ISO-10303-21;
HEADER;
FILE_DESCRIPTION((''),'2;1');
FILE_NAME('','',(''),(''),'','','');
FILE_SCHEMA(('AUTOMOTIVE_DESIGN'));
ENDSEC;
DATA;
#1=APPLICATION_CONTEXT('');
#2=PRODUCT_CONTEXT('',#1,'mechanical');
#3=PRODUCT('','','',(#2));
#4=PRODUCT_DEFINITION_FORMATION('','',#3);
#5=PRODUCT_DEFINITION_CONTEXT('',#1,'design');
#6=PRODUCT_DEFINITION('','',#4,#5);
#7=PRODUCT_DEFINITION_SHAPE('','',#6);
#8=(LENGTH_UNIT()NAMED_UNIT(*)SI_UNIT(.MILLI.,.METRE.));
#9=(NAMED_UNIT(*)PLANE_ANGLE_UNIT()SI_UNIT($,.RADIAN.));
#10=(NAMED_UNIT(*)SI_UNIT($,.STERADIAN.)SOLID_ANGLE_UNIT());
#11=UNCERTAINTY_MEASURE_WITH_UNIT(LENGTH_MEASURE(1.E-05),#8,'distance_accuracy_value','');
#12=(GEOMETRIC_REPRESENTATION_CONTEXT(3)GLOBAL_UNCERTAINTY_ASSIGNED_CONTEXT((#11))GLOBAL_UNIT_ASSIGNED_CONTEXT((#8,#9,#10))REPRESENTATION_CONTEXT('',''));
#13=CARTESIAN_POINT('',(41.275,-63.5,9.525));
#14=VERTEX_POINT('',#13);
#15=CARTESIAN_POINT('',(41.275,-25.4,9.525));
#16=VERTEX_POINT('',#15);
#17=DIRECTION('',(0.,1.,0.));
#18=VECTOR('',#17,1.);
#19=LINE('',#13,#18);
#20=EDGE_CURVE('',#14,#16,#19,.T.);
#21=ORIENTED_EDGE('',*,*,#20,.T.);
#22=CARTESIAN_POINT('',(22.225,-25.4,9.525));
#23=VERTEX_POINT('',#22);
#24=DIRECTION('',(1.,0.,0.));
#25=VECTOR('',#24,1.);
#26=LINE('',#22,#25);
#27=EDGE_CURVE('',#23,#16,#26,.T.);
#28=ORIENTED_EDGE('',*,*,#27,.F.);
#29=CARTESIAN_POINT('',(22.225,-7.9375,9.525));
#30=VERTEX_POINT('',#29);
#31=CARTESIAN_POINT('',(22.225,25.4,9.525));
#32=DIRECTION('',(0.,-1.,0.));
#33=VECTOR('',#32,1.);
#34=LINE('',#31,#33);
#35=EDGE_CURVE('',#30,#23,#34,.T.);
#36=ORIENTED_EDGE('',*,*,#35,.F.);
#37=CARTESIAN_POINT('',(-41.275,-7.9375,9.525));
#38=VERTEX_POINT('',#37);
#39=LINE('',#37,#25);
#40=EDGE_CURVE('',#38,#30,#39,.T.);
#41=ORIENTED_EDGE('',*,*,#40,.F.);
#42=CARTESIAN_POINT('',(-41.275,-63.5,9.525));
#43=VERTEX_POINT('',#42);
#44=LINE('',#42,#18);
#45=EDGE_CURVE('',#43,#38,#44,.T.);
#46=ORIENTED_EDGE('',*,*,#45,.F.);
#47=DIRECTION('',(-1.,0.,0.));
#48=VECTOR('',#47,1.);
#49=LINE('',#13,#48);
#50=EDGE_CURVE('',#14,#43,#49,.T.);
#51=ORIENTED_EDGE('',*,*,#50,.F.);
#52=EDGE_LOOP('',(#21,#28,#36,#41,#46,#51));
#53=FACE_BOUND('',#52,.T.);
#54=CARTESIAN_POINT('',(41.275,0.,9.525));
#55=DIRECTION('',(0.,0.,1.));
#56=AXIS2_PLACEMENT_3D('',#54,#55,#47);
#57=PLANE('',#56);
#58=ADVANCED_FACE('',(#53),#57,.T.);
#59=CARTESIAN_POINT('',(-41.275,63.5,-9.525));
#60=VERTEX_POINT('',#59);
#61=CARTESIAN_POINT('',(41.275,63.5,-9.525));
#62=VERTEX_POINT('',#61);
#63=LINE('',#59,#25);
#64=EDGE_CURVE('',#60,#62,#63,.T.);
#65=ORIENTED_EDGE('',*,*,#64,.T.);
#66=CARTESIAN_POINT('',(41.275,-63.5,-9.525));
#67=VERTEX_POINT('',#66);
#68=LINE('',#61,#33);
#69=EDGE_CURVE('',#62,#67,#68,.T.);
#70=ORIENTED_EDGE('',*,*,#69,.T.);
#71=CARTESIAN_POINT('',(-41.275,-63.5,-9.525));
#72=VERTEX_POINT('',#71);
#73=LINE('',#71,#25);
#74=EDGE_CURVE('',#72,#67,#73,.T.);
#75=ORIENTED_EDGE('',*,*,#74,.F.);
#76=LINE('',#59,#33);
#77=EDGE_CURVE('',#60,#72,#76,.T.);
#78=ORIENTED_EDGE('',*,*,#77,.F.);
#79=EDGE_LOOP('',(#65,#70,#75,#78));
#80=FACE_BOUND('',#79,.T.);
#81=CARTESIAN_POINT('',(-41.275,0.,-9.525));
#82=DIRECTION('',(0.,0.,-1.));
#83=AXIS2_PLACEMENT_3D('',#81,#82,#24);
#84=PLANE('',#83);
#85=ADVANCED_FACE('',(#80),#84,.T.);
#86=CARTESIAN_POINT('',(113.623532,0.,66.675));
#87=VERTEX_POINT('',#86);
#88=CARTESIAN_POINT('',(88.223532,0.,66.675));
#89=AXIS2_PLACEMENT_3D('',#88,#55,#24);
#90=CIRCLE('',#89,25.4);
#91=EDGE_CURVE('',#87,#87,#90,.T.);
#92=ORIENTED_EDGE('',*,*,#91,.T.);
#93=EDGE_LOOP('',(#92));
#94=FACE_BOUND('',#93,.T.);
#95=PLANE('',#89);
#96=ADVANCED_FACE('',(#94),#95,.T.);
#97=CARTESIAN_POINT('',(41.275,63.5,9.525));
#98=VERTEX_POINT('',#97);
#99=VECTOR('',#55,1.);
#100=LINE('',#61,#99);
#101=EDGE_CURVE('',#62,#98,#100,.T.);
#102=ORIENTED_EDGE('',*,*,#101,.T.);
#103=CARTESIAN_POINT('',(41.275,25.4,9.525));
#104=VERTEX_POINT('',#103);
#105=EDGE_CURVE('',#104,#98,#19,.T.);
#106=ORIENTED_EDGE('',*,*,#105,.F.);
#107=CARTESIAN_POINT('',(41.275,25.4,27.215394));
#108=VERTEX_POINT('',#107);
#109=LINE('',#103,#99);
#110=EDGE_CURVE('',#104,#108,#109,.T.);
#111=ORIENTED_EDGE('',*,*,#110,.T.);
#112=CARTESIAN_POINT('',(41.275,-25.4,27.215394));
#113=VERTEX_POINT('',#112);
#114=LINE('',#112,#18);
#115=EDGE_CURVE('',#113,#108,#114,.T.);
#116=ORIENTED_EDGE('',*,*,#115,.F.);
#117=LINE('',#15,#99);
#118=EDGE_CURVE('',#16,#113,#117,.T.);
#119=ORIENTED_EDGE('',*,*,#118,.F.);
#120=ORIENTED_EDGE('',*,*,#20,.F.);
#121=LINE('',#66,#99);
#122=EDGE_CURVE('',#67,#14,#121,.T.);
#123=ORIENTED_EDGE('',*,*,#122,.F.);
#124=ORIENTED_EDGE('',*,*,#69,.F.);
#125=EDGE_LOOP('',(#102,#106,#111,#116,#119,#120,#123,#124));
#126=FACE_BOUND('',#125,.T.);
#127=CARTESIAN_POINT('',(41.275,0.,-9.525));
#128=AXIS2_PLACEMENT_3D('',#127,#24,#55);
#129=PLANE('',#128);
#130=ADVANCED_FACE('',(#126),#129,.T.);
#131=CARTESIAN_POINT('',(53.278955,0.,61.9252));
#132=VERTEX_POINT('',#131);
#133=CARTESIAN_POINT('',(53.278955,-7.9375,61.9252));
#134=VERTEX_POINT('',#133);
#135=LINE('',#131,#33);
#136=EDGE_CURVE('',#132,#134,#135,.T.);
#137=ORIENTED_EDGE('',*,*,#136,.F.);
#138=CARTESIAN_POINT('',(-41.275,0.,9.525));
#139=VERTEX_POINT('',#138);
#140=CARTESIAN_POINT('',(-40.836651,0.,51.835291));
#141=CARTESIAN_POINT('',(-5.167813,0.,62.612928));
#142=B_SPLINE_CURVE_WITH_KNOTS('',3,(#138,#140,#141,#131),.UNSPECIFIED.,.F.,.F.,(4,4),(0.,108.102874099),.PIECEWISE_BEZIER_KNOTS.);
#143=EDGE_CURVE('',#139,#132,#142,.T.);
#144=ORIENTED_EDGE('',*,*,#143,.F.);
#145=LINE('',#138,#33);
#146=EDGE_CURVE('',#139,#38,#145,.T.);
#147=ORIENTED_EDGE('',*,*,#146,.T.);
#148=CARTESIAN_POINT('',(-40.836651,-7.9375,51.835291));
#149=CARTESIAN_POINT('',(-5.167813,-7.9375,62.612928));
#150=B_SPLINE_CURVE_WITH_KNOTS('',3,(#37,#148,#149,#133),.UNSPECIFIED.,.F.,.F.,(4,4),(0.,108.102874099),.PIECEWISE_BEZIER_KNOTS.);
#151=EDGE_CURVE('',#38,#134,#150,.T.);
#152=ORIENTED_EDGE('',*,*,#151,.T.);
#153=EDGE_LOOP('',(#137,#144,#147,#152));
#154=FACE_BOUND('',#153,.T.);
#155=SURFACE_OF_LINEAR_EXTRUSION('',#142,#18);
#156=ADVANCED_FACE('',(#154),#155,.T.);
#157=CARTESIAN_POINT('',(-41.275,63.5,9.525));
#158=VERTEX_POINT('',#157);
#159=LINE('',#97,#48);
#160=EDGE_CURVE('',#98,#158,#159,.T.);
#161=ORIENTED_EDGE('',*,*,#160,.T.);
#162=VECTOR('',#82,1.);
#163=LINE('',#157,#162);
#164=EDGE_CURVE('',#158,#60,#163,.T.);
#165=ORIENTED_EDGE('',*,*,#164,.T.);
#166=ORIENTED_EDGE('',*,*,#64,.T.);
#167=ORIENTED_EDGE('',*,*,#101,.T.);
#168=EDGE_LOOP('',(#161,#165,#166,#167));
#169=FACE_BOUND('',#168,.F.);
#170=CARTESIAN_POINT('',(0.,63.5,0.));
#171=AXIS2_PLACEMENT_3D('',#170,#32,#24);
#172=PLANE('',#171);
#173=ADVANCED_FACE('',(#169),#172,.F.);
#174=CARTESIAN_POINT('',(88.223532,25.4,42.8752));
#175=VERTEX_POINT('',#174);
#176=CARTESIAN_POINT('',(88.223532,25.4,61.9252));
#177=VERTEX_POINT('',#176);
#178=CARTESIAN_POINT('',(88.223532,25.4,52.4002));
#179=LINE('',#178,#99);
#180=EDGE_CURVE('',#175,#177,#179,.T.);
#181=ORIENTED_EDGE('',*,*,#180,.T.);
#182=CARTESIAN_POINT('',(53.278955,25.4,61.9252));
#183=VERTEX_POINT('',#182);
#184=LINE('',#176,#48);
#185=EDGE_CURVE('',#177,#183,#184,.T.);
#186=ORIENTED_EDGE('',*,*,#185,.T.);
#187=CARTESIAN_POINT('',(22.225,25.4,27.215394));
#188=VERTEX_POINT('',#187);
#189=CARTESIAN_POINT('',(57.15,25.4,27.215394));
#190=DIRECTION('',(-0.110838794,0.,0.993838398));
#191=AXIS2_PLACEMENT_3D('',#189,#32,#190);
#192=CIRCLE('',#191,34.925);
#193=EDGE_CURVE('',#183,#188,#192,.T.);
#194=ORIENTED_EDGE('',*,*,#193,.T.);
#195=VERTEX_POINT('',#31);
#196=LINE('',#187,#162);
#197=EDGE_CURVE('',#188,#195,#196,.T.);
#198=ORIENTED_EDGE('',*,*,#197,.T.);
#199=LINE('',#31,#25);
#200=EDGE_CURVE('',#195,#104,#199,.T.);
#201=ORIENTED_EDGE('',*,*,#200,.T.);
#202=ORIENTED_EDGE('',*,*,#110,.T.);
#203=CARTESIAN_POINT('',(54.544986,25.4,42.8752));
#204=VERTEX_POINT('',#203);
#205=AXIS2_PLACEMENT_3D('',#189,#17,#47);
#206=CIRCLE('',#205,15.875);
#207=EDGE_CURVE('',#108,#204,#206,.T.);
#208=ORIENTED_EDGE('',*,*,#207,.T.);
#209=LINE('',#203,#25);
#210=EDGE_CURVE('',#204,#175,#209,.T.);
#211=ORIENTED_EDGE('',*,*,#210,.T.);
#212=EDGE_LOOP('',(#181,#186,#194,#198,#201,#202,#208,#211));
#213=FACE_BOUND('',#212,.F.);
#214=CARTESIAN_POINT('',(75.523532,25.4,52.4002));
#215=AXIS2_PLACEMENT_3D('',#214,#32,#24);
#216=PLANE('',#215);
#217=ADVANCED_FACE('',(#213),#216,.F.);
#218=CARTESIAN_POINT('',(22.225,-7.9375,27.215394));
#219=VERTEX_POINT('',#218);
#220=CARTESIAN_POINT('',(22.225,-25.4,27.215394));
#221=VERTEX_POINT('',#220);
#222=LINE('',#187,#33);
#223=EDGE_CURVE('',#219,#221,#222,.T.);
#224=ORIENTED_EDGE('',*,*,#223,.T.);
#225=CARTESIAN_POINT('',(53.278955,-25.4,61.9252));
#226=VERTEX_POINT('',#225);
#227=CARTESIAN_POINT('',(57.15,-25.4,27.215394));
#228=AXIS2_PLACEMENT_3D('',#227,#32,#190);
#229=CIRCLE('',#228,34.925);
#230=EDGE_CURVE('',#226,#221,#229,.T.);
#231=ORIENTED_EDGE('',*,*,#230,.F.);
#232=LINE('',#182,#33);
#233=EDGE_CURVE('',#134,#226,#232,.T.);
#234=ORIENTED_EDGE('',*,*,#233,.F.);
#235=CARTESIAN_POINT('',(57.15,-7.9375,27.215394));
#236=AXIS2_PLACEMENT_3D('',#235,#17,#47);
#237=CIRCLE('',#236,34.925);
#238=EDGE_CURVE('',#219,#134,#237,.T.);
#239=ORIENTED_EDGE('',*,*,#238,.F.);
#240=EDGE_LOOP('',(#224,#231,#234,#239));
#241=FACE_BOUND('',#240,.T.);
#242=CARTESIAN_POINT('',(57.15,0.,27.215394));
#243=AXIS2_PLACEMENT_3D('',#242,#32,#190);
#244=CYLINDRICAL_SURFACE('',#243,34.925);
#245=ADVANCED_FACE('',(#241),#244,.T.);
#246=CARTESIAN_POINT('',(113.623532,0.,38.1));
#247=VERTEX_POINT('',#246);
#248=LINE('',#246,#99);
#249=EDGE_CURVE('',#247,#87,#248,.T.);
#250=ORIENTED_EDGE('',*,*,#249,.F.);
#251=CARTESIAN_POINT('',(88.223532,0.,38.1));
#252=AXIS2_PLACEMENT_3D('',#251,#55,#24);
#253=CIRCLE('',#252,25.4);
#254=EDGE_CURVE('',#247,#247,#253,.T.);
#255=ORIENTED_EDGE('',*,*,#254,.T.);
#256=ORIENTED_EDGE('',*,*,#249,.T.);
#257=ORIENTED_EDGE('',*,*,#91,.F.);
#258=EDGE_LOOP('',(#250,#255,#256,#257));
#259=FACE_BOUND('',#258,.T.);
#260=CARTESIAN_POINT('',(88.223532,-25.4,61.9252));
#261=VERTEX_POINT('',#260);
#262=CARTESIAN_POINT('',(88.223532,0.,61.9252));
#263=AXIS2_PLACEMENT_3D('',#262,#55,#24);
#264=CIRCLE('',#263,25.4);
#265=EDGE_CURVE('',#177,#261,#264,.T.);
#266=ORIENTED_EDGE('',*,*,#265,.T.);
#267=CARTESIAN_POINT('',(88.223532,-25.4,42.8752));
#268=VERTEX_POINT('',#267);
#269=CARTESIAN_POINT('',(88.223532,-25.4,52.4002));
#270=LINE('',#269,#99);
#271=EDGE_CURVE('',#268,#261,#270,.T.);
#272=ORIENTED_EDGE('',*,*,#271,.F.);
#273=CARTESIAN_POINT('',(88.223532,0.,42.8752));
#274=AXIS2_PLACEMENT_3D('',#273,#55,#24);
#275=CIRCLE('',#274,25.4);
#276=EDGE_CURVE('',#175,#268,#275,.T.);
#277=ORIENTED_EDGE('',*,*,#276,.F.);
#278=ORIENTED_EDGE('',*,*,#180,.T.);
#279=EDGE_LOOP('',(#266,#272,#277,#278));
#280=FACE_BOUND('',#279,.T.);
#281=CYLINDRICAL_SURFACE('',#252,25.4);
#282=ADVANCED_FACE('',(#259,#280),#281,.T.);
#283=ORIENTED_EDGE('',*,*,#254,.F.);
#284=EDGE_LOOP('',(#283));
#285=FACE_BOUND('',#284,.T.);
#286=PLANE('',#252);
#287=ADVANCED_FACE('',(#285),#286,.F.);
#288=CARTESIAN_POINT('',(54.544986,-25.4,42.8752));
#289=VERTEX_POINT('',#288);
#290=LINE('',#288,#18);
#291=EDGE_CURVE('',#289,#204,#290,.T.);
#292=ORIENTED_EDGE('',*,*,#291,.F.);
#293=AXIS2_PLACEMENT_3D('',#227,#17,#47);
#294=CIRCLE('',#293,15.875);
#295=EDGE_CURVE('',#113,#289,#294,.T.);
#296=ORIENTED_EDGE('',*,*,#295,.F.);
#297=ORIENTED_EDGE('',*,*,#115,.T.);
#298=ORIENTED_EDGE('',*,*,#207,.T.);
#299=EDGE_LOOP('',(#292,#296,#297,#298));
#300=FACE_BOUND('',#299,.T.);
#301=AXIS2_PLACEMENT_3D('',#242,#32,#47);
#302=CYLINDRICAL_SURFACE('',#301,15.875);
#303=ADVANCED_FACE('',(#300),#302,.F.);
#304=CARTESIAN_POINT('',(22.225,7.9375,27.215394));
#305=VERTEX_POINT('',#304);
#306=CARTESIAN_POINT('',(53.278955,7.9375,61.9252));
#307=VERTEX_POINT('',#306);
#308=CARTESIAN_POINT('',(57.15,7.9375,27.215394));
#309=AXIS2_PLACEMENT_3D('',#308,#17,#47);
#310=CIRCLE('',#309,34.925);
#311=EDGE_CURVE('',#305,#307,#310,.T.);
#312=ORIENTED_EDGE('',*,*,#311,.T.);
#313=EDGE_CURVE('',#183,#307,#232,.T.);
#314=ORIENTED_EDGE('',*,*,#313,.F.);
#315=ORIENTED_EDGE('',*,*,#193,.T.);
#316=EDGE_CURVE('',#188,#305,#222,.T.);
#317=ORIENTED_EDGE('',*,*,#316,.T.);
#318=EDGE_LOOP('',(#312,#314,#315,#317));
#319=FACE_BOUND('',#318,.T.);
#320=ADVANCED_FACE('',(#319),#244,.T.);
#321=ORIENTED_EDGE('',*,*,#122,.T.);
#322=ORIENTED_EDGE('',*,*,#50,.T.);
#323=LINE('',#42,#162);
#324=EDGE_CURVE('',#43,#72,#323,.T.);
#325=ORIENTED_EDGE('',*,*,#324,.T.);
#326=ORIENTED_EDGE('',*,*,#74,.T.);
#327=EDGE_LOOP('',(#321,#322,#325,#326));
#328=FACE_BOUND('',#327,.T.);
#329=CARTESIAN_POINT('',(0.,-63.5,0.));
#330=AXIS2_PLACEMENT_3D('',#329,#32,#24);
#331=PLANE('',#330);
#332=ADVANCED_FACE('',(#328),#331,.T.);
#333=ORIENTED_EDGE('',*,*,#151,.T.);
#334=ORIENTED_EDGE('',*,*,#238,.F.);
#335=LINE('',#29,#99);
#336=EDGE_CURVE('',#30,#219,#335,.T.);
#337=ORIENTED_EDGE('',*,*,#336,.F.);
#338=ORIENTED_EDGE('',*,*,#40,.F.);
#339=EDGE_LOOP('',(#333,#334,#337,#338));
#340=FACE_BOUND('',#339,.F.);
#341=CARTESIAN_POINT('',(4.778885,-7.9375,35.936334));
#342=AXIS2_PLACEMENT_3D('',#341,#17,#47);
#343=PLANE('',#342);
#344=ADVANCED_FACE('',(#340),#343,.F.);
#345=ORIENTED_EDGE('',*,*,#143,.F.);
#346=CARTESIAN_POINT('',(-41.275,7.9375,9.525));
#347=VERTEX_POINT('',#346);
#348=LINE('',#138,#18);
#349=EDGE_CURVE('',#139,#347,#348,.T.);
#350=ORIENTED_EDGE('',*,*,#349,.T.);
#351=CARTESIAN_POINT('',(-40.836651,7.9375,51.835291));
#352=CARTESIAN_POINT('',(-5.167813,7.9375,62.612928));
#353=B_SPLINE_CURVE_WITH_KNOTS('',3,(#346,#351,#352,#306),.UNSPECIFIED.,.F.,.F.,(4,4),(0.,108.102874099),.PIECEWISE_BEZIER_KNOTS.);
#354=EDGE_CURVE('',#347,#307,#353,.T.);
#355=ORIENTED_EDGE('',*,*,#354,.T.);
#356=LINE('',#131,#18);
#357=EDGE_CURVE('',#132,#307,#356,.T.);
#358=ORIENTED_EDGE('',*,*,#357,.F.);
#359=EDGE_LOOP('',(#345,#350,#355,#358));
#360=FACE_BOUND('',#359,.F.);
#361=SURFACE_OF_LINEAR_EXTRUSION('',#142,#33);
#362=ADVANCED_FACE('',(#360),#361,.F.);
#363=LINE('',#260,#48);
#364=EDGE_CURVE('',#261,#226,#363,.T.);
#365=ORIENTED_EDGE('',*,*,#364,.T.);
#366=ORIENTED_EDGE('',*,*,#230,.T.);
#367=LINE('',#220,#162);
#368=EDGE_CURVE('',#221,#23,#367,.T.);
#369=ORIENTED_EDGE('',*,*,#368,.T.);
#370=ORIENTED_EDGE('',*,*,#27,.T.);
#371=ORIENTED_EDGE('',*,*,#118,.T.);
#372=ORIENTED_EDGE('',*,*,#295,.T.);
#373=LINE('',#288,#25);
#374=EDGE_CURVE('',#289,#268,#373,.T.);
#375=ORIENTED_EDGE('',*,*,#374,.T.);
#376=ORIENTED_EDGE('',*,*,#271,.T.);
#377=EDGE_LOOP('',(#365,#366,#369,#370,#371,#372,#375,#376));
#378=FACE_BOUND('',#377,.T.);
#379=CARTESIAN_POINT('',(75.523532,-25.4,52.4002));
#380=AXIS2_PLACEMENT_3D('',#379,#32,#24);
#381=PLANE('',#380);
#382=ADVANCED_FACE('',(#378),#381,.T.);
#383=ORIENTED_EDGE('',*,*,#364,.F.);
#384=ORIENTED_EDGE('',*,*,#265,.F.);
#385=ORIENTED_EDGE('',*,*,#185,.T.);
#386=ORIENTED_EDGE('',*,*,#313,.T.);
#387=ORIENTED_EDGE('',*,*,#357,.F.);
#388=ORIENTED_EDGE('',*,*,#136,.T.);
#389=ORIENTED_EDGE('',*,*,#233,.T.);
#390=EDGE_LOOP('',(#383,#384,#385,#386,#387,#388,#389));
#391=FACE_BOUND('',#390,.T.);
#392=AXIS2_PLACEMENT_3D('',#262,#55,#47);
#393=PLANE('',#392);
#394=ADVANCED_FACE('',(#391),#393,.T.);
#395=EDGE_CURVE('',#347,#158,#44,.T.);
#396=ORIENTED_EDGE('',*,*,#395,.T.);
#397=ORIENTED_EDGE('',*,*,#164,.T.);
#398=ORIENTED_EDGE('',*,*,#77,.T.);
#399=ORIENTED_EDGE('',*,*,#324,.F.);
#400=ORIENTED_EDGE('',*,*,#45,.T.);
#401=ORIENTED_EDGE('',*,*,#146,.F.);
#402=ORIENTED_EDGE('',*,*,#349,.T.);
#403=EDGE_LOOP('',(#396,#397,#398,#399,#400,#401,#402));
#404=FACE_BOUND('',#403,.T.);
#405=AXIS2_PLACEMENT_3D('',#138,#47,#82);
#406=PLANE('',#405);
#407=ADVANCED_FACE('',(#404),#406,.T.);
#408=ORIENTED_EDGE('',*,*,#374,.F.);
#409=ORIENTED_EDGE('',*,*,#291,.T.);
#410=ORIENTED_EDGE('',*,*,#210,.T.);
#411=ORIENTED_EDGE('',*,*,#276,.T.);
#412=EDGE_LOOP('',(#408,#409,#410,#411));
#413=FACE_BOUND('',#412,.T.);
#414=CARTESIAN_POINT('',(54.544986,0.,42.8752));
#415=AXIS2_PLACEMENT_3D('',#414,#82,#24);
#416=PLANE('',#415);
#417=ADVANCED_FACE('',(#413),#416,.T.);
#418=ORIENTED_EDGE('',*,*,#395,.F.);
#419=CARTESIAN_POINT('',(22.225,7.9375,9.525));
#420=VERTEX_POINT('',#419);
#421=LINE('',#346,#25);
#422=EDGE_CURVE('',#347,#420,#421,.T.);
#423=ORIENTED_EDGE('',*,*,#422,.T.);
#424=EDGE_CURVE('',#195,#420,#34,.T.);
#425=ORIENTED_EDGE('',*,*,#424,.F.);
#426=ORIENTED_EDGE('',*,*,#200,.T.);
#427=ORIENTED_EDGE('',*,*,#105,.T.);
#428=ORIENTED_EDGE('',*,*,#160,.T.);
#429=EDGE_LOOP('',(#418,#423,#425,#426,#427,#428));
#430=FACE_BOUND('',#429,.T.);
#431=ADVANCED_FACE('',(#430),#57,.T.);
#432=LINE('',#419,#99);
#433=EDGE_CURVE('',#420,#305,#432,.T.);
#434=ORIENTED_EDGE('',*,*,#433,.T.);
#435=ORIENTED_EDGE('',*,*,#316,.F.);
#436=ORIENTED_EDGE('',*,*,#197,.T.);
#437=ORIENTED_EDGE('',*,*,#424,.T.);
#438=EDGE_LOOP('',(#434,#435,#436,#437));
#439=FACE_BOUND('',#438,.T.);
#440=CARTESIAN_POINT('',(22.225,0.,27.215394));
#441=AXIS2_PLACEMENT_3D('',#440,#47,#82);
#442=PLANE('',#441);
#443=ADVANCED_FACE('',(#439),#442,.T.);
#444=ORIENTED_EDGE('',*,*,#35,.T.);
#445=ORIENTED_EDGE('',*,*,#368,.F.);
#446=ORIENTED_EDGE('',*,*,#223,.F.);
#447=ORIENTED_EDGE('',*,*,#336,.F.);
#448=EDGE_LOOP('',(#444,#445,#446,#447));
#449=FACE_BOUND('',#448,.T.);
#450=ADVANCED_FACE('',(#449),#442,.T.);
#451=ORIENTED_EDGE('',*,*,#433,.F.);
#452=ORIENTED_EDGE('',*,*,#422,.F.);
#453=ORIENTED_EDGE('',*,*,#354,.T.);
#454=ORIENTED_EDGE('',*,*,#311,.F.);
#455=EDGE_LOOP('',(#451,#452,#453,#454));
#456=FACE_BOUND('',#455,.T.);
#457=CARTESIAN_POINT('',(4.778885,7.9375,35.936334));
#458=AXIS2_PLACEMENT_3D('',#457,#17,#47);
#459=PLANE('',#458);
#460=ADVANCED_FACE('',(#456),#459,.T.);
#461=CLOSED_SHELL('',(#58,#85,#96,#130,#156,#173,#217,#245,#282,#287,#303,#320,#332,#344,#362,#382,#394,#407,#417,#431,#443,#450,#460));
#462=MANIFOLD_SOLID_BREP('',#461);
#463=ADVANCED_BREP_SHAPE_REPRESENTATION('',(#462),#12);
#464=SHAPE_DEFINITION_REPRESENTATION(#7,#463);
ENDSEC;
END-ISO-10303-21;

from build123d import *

# Parameters (mm, degrees)
F1_DEPTH = 63.5
F0_W     = 25.4
F0_H     = 19.05
F2_DEPTH = 25.4
F3_DEPTH = 7.9375


with BuildPart() as f1:
    # F0 (on Front) → F1 (new body, symmetric)
    with BuildSketch(Plane.XZ):
        Polygon((-41.275, 9.525), (-41.275, -9.525), (41.275, -9.525), (41.275, 9.525), (22.225, 9.525), align=None)
    extrude(amount=F1_DEPTH, both=True)

    # F0 (on Front) → F2 (join, symmetric)
    with BuildSketch(Plane.XZ):
        with Locations((75.5235318422, 52.4002)):
            Rectangle(F0_W, F0_H)
        with BuildLine():
            Line((22.225, 9.525), (41.275, 9.525))
            Line((41.275, 9.525), (41.275, 27.2153939429))
            ThreePointArc((41.275, 27.2153939429), (45.0386370244, 37.4784593657), (54.5449857479, 42.8752))
            Line((54.5449857479, 42.8752), (62.8235318422, 42.8752))
            Line((62.8235318422, 42.8752), (62.8235318422, 61.9252))
            Line((62.8235318422, 61.9252), (53.2789551181, 61.9252))
            ThreePointArc((53.2789551181, 61.9252), (31.1216321343, 50.5022935057), (22.225, 27.2153939429))
            Line((22.225, 27.2153939429), (22.225, 9.525))
        make_face()
    extrude(amount=F2_DEPTH, both=True)

    # F0 (on Front) → F3 (join, symmetric)
    with BuildSketch(Plane.XZ):
        with BuildLine():
            add(Edge.make_bspline(
                [(-41.275, 9.525), (-40.8366508782, 51.8352910876), (-5.1678125747, 62.6129284501), (53.2789551181, 61.9252)],
                knots=[0, 0, 0, 0, 108.1028740992, 108.1028740992, 108.1028740992, 108.1028740992], degree=3))
            Line((-41.275, 9.525), (22.225, 9.525))
            Line((22.225, 9.525), (22.225, 27.2153939429))
            ThreePointArc((22.225, 27.2153939429), (31.1216321343, 50.5022935057), (53.2789551181, 61.9252))
        make_face()
    extrude(amount=F3_DEPTH, both=True)

    # F0 (on Front) → F4 (revolve)
    with BuildSketch(Plane.XZ):
        Polygon((88.2235318422, 66.675), (88.2235318422, 61.9252), (88.2235318422, 42.8752), (88.2235318422, 38.1), (113.6235318422, 38.1), (113.6235318422, 66.675), align=None)
    revolve(axis=Axis((88.2235318422, 0, 52.3875), (0, 0, 1)))


solid = f1.part
